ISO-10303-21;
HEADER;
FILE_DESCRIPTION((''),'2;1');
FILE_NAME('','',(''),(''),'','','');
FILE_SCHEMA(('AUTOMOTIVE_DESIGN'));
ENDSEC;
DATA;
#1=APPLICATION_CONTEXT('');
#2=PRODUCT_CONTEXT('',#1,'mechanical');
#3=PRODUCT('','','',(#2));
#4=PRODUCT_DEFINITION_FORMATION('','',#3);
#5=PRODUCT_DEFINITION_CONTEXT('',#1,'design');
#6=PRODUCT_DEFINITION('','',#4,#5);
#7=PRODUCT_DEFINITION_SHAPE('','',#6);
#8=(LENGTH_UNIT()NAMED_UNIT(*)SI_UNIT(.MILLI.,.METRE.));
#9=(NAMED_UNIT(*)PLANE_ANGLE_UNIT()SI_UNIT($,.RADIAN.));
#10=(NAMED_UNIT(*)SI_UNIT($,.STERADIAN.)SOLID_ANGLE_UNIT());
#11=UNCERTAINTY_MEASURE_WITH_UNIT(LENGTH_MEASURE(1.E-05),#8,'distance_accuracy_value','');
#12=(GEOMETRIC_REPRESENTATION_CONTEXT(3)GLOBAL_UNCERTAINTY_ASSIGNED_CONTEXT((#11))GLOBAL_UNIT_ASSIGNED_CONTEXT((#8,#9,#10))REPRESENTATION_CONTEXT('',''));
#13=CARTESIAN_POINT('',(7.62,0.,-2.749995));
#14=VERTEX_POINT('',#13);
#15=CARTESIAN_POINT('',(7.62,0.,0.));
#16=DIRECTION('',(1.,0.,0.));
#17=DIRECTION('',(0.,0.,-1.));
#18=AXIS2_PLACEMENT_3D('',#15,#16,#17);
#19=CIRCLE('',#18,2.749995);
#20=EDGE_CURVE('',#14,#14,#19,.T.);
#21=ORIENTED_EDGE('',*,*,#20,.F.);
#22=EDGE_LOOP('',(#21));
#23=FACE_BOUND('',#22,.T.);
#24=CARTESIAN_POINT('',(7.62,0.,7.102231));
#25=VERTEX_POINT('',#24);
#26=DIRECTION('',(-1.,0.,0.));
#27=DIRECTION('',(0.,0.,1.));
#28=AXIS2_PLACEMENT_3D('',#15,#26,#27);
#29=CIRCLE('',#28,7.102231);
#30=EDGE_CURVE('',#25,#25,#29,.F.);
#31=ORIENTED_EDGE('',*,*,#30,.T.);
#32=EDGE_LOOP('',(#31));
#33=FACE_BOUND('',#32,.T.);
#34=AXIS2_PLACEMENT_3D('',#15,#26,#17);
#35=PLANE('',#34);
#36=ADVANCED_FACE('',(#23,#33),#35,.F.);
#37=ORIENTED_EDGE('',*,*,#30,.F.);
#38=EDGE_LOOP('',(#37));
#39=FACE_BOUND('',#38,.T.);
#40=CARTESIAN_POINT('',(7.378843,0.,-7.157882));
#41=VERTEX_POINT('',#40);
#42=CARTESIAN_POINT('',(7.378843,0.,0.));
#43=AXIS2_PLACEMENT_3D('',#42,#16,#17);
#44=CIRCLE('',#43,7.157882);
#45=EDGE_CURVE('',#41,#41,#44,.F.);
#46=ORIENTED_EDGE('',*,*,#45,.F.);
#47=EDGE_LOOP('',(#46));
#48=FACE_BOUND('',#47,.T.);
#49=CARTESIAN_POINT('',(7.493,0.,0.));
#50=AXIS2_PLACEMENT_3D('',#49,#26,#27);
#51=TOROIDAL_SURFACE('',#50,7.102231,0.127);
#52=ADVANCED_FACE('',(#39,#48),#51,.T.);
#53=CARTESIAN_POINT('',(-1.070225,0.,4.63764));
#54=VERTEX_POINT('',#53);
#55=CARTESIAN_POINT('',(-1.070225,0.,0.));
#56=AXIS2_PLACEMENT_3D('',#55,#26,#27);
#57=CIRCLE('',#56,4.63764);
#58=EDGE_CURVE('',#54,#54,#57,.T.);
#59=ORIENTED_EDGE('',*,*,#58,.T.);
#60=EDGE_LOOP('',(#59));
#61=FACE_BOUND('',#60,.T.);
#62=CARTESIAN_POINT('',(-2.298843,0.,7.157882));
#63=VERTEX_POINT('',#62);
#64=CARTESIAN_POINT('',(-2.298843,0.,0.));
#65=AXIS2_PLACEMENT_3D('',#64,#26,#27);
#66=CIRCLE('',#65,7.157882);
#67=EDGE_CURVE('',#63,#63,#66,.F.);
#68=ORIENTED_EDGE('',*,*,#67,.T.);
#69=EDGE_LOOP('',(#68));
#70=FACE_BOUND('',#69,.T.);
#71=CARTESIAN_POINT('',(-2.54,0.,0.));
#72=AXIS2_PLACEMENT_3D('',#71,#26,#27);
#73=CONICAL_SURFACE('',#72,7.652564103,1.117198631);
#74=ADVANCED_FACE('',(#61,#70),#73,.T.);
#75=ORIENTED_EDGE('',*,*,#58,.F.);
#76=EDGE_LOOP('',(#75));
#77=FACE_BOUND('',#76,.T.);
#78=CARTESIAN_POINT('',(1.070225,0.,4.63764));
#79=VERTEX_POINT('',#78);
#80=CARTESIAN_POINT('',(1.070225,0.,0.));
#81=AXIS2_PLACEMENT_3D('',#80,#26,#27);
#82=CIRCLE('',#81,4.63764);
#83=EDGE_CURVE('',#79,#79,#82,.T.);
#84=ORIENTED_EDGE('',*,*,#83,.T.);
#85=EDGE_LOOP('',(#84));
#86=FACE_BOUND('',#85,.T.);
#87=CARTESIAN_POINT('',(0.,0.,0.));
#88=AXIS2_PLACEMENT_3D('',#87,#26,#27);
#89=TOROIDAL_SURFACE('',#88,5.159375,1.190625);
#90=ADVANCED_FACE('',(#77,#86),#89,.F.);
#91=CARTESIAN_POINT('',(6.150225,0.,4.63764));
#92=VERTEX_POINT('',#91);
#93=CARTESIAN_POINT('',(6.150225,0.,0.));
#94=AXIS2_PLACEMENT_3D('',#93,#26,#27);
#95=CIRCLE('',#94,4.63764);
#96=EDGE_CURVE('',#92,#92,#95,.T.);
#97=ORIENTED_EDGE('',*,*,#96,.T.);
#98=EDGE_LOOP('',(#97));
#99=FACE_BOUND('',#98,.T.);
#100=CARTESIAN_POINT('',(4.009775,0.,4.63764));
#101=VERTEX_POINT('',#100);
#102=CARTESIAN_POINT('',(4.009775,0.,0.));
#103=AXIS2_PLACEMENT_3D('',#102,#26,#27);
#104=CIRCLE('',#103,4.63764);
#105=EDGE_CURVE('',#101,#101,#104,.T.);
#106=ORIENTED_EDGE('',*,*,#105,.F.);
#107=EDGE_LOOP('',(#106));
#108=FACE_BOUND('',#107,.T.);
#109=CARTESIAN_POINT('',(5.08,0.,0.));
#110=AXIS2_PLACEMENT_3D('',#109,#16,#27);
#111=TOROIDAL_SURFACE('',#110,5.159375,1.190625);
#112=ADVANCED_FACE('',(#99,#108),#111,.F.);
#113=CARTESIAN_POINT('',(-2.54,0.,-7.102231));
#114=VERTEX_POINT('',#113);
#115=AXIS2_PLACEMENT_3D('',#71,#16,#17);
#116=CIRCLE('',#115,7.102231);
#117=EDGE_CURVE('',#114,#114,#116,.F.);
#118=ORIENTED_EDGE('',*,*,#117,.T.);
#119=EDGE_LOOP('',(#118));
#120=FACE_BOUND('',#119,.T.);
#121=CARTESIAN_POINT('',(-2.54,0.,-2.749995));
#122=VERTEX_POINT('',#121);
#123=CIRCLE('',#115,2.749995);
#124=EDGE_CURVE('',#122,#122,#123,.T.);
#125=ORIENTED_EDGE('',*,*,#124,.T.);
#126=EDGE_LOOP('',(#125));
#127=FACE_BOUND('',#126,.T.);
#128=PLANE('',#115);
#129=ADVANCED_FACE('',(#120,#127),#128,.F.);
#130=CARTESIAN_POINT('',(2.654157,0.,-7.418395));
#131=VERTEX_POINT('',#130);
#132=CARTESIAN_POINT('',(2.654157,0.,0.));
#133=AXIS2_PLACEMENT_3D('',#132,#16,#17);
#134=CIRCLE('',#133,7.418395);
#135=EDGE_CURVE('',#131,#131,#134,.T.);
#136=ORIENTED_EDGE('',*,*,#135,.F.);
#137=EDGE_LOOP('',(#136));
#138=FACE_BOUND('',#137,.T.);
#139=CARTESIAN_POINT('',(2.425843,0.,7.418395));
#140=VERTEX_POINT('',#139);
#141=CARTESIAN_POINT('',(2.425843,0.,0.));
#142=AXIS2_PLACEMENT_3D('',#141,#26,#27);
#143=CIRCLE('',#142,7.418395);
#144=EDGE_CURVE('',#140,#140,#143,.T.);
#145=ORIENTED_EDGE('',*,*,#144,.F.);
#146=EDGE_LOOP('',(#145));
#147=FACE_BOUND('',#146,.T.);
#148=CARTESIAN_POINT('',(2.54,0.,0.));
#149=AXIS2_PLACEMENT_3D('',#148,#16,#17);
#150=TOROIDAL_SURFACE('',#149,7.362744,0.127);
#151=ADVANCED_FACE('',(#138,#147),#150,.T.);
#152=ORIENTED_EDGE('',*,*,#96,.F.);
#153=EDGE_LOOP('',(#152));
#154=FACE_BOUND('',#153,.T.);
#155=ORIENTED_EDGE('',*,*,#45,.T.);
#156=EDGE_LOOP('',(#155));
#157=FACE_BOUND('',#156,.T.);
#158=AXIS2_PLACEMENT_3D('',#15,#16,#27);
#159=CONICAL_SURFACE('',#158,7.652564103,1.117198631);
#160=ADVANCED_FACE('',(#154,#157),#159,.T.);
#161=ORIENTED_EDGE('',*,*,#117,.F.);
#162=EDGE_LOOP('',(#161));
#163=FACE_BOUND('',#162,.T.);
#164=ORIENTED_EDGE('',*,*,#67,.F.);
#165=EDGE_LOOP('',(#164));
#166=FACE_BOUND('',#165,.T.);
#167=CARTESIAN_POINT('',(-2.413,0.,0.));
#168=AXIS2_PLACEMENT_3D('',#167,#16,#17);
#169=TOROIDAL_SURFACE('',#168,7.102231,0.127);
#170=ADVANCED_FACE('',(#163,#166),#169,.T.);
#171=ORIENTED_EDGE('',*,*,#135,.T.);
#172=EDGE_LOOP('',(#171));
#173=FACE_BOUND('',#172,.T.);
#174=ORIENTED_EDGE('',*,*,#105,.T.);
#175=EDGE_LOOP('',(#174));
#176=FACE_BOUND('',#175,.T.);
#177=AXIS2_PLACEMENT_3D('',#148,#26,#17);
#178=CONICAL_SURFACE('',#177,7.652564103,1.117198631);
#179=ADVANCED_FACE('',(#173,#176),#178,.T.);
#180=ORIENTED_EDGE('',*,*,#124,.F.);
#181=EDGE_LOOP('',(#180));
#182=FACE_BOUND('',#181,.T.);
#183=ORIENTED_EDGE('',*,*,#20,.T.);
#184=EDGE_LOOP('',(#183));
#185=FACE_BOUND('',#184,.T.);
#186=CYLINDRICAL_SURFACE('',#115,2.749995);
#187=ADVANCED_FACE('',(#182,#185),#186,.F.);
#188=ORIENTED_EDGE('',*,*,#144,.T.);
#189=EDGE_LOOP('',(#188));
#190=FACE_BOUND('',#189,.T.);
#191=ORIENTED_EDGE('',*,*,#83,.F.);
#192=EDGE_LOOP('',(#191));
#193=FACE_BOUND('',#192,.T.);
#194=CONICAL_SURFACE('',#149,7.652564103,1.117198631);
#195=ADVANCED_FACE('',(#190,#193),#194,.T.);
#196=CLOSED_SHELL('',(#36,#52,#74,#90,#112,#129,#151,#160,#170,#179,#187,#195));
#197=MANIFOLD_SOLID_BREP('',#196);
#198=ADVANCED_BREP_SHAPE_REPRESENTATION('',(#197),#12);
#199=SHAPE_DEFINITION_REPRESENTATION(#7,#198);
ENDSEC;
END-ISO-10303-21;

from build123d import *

# Parameters (mm, degrees)
FILLET2_R          = 0.127
SKETCH5_R          = 2.7499945
CUT_EXTRUDE3_DEPTH = 15.677255543


with BuildPart() as part:
    # Sketch1 → Revolve1 (revolve)
    with BuildSketch(Plane.XY, mode=Mode.PRIVATE) as revolve1_sk:
        with BuildLine():
            ThreePointArc((-1.070224719, 4.637640449), (0, 3.96875), (1.070224719, 4.637640449))
            Line((1.070224719, 4.637640449), (1.905, 6.35))
            Line((1.905, 6.35), (1.905, 0))
            Line((1.905, 0), (-1.905, 0))
            Line((-1.905, 0), (-1.905, 6.35))
            Line((-1.905, 6.35), (-1.070224719, 4.637640449))
        make_face()
        Polygon((-2.54, 7.652564103), (-2.54, 0), (-1.905, 0), (-1.905, 6.35), align=None)
        Polygon((1.905, 0), (1.905, 6.35), (2.54, 7.652564103), (2.54, 0), align=None)
    revolve1 = revolve(revolve1_sk.sketch.rotate(Axis((-602.921612104, 0, 0), (1, 0, 0)), 90), axis=Axis((-602.921612104, 0, 0), (1, 0, 0)))

    # Mirror3: Revolve1 across plane
    add(revolve1.mirror(Plane(origin=(2.54, 0, 0), x_dir=(0, 0, 1), z_dir=(1, 0, 0))))

    # Fillet2
    fillet2_edges = [part.edges().sort_by_distance(p)[0] for p in [
        (7.62, 0, -7.652564103),
        (2.54, 0, -7.652564103),
        (-2.54, 0, -7.652564103),
    ]]
    fillet(fillet2_edges, radius=FILLET2_R - 0.0001)  # a hair under: the kernel refuses the full size

    # Sketch5 → Cut-Extrude3 (cut, through all)
    with BuildSketch(Plane(origin=(7.62, 0, 0), x_dir=(0, 0, -1), z_dir=(1, 0, 0))):
        Circle(SKETCH5_R)
    extrude(amount=-CUT_EXTRUDE3_DEPTH, mode=Mode.SUBTRACT)


solid = part.part
